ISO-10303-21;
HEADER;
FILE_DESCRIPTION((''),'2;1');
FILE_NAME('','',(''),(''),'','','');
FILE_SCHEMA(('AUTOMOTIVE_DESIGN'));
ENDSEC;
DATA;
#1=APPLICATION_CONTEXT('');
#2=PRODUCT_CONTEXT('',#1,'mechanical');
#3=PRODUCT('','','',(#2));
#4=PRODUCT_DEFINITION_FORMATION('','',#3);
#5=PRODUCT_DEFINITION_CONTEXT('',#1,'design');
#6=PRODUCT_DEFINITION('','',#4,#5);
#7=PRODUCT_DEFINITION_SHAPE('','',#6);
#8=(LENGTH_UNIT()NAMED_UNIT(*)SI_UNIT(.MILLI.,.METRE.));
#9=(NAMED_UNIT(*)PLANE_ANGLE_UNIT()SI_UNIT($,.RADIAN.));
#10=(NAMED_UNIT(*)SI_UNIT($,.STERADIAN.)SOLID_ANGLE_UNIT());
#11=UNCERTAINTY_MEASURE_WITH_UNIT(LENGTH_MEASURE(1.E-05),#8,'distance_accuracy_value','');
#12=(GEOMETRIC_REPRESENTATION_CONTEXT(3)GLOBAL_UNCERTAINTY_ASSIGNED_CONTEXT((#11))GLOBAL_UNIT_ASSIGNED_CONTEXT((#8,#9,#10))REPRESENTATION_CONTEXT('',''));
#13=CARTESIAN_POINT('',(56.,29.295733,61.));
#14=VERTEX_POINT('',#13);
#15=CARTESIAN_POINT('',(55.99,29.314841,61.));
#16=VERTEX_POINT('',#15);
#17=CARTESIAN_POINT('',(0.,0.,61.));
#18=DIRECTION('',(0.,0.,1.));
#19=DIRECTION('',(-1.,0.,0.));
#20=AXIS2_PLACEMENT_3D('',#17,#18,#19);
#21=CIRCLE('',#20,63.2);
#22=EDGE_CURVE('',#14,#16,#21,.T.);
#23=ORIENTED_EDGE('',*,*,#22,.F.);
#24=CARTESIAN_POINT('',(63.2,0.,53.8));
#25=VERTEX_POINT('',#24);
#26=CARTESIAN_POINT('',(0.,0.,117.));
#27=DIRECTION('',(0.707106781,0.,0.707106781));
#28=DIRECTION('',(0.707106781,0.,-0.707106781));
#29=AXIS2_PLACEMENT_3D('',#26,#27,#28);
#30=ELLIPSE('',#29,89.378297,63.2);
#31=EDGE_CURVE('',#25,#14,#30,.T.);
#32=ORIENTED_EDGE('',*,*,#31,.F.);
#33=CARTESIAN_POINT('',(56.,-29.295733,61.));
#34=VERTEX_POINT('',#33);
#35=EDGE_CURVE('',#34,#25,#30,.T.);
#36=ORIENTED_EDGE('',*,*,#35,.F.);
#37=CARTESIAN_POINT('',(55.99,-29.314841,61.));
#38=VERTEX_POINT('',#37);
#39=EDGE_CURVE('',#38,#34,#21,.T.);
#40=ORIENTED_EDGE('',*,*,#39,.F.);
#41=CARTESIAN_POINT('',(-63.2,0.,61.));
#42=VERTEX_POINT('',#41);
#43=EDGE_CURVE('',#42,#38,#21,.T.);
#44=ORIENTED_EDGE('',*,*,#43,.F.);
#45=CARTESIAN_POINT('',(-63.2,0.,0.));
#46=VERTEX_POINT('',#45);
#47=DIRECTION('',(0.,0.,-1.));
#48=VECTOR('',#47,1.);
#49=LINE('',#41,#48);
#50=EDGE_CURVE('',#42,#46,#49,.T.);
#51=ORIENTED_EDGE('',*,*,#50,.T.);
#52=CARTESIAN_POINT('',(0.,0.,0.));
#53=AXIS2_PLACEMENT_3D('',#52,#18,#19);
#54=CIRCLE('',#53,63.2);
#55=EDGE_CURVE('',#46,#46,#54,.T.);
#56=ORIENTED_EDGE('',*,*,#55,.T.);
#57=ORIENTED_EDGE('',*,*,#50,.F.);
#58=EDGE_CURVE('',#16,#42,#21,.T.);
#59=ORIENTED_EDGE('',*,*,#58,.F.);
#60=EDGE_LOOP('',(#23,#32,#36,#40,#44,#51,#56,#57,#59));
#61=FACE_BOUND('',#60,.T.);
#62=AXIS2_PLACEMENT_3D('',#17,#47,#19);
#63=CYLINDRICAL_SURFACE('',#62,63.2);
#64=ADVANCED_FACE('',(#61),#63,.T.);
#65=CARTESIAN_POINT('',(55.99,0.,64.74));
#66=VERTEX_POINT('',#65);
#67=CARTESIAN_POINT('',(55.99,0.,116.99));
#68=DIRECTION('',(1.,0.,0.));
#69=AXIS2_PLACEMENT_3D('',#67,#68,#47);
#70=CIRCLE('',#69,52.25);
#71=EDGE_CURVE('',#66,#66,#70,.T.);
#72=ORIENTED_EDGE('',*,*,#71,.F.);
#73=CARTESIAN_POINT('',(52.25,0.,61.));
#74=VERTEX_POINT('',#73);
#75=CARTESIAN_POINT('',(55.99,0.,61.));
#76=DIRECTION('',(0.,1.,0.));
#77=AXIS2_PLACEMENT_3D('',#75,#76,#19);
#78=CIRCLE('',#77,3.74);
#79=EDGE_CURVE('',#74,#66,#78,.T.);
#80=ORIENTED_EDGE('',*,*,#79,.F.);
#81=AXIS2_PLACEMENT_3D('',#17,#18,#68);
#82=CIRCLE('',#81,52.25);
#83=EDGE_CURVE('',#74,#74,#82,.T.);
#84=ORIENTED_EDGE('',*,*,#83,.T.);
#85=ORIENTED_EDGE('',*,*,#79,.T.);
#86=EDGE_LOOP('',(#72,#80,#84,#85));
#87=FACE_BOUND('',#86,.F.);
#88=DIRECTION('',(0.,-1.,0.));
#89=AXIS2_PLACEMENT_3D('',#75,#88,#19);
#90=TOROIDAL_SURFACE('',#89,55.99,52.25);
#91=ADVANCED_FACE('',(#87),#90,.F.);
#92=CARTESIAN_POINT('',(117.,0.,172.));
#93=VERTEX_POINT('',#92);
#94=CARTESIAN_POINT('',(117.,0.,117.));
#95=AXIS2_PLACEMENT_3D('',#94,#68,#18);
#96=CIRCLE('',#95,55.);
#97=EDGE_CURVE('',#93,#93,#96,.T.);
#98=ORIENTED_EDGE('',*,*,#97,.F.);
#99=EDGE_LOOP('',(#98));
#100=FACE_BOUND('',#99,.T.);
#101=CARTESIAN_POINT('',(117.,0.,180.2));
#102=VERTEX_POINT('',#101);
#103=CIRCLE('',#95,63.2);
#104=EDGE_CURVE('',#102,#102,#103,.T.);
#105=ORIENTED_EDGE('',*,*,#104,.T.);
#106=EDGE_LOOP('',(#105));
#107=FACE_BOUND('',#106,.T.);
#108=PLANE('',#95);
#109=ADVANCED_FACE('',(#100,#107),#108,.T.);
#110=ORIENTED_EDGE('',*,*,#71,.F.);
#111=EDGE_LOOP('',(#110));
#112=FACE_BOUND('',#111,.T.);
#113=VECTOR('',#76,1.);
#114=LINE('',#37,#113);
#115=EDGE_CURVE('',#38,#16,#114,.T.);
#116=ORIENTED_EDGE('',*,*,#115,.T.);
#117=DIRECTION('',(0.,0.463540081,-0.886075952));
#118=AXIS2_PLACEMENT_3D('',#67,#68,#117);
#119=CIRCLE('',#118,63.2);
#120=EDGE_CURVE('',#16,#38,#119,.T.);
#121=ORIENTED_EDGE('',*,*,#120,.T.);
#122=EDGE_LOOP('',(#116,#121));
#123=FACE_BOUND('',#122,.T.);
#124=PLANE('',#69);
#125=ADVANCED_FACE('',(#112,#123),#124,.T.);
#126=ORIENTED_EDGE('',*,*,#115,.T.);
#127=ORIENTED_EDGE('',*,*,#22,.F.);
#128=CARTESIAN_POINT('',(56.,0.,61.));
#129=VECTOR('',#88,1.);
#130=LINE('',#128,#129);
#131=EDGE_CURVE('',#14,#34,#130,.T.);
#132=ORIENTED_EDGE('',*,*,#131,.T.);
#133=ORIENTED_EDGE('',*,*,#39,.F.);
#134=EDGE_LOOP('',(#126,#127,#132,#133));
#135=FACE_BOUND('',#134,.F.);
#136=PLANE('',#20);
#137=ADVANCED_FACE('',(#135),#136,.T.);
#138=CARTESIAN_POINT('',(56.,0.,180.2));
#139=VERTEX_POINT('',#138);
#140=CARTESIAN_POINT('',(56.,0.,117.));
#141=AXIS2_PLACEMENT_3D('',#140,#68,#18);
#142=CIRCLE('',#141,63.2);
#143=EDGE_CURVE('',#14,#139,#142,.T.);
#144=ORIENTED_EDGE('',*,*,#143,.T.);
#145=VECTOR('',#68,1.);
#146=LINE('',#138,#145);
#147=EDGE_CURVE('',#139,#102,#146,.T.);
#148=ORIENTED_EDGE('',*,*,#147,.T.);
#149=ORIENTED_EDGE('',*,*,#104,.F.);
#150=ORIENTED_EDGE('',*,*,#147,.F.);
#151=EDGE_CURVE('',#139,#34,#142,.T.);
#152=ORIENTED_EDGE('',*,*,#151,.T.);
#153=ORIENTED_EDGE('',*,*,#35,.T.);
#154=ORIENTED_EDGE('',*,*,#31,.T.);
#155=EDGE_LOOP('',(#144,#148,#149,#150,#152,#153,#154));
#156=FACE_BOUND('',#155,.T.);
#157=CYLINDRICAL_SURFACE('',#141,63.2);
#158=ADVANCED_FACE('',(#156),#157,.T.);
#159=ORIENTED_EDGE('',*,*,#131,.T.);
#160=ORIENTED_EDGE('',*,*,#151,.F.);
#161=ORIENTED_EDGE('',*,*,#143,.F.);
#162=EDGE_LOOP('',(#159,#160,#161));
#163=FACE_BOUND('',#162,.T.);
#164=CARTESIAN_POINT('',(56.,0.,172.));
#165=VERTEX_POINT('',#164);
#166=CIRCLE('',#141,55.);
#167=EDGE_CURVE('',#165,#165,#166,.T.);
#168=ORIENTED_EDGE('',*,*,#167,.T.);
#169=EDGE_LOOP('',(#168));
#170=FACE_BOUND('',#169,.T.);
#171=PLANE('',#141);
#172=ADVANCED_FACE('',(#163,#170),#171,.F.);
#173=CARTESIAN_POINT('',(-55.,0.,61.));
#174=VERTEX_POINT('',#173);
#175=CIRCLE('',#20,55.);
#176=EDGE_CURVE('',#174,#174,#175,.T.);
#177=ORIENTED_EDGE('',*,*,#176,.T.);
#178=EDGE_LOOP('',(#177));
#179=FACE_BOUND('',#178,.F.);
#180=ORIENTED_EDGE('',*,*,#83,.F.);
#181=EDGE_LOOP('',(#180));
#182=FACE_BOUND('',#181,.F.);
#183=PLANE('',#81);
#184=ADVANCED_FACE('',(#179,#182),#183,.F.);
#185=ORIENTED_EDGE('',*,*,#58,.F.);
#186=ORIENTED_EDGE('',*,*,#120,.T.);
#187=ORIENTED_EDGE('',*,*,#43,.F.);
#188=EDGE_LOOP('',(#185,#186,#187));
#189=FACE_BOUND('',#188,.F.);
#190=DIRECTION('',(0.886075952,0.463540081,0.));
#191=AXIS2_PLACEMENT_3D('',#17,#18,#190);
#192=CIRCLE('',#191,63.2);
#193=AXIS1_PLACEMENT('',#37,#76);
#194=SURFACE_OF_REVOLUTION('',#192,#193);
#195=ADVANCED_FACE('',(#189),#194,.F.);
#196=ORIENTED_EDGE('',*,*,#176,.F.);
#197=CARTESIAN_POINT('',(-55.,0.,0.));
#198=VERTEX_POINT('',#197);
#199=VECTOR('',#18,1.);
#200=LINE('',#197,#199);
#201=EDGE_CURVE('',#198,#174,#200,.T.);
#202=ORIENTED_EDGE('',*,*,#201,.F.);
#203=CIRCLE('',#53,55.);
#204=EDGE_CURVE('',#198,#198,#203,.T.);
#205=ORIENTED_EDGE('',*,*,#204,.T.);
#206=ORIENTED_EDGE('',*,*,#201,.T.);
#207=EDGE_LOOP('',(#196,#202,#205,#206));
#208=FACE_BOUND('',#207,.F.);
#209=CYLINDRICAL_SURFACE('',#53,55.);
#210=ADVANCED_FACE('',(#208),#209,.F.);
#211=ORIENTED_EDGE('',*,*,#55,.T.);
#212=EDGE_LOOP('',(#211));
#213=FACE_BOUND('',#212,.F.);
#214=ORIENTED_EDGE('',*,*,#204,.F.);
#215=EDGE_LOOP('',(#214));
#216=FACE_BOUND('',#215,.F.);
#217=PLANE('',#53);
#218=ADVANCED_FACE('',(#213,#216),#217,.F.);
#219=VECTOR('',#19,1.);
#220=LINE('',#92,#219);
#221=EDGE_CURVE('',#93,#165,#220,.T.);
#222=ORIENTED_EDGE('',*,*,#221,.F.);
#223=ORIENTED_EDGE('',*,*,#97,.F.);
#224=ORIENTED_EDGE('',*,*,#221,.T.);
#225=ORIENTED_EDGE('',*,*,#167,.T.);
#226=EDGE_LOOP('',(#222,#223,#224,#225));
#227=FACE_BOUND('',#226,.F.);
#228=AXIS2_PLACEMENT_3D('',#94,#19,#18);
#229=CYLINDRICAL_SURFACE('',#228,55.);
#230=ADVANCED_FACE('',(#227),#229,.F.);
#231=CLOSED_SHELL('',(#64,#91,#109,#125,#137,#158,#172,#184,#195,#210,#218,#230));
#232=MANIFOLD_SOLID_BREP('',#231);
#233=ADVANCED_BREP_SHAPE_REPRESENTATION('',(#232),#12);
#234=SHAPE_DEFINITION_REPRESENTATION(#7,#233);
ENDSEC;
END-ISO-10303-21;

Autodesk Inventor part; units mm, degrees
ref_plane "YZ Plane" through (0, 0, 0) normal (1, 0, 0) x (0, 1, 0)
ref_plane "XZ Plane" through (0, 0, 0) normal (0, 1, 0) x (-1, 0, 0)
ref_plane "XY Plane" through (0, 0, 0) normal (0, 0, 1) x (1, 0, 0)
sketch "Sketch1" plane through (0, 0, 0) normal (0, 1, 0) x (-1, 0, 0)
  line L0 (0, 0) -> (0, 117) construction
  line L1 (0, 117) -> (-117, 117) construction
  line L2 (63.2, 0) -> (55, 0)
  line L3 (55, 0) -> (55, 61)
  line L4 (55, 61) -> (63.2, 61)
  line L5 (63.2, 61) -> (63.2, 0)
  line L6 (0, 0) -> (55, 0) construction
  line L7 (55, 61) -> (0, 61) construction
  line L8 (-117, 117) -> (-117, 172) construction
  line L9 (-117, 172) -> (-56, 172)
  line L10 (-56, 172) -> (-56, 180.2)
  line L11 (-56, 180.2) -> (-117, 180.2)
  line L12 (-117, 180.2) -> (-117, 172)
  line L13 (-56, 172) -> (-56, 117) construction
  dimension "d0" = 61
  dimension "d1" = 56
  dimension "d2" = 110
  dimension "d3" = 8.2
  dimension "d4" = 61
  dimension "d5" = 8.2
  dimension "d6" = 110
  dimension "d7" = 56
revolve "Revolution1" add sketch "Sketch1" angle 360 about axis through (0, 0, 117) along (1, 0, 0) contours L12 L11 L10 L9
revolve "Revolution2" add sketch "Sketch1" angle 360 about axis through (0, 0, 0) along (0, 0, 1) contours L2 L3 L4 L5
sketch "Sketch2" plane through (0, 0, 61) normal (0, 0, 1) x (1, 0, 0)
  line L0 (56, 29.295733) -> (56, -29.295733)
  line L1 (56, -29.295733) -> (56, 29.295733)
  line L2 (56, 55) -> (56, -55)
  line L3 (55.99, -29.314841) -> (55.99, 29.314841)
  arc A0 (56, 29.295733) -> (56, -29.295733) centre (0, 0) ccw
  circle A1 centre (0, 0) radius 63.2
  circle A2 centre (0, 0) radius 52.25
  dimension "d8" = 0.01
  dimension "d9" = 126.4
  dimension "d10" = 104.5
revolve "Revolution3" add sketch "Sketch2" angle 90 about axis through (55.99, -29.314841, 61) along (0, 1, 0) contours L3 A0
equation "\"d0\" = t1"
equation "\"d1\" = z1"
equation "\"d2\" = dd1"
equation "\"d3\" = s1"
equation "\"d4\" = t1"
equation "\"d5\" = s1"
equation "\"d6\" = dd1"
equation "\"d7\" = z1"
equation "\"d9\" = dd1 + 2 * s1"
equation "\"d10\" = 0.95 * dd1"
equation "\"z1\" = 56"
equation "\"t1\" = 61"
equation "\"s1\" = 8.2"
equation "\"dd1\" = 110"
properties part number "DIN 8063 Колено 90 градусов, тип W1 110" material "ПВХ, непластифицированный"
